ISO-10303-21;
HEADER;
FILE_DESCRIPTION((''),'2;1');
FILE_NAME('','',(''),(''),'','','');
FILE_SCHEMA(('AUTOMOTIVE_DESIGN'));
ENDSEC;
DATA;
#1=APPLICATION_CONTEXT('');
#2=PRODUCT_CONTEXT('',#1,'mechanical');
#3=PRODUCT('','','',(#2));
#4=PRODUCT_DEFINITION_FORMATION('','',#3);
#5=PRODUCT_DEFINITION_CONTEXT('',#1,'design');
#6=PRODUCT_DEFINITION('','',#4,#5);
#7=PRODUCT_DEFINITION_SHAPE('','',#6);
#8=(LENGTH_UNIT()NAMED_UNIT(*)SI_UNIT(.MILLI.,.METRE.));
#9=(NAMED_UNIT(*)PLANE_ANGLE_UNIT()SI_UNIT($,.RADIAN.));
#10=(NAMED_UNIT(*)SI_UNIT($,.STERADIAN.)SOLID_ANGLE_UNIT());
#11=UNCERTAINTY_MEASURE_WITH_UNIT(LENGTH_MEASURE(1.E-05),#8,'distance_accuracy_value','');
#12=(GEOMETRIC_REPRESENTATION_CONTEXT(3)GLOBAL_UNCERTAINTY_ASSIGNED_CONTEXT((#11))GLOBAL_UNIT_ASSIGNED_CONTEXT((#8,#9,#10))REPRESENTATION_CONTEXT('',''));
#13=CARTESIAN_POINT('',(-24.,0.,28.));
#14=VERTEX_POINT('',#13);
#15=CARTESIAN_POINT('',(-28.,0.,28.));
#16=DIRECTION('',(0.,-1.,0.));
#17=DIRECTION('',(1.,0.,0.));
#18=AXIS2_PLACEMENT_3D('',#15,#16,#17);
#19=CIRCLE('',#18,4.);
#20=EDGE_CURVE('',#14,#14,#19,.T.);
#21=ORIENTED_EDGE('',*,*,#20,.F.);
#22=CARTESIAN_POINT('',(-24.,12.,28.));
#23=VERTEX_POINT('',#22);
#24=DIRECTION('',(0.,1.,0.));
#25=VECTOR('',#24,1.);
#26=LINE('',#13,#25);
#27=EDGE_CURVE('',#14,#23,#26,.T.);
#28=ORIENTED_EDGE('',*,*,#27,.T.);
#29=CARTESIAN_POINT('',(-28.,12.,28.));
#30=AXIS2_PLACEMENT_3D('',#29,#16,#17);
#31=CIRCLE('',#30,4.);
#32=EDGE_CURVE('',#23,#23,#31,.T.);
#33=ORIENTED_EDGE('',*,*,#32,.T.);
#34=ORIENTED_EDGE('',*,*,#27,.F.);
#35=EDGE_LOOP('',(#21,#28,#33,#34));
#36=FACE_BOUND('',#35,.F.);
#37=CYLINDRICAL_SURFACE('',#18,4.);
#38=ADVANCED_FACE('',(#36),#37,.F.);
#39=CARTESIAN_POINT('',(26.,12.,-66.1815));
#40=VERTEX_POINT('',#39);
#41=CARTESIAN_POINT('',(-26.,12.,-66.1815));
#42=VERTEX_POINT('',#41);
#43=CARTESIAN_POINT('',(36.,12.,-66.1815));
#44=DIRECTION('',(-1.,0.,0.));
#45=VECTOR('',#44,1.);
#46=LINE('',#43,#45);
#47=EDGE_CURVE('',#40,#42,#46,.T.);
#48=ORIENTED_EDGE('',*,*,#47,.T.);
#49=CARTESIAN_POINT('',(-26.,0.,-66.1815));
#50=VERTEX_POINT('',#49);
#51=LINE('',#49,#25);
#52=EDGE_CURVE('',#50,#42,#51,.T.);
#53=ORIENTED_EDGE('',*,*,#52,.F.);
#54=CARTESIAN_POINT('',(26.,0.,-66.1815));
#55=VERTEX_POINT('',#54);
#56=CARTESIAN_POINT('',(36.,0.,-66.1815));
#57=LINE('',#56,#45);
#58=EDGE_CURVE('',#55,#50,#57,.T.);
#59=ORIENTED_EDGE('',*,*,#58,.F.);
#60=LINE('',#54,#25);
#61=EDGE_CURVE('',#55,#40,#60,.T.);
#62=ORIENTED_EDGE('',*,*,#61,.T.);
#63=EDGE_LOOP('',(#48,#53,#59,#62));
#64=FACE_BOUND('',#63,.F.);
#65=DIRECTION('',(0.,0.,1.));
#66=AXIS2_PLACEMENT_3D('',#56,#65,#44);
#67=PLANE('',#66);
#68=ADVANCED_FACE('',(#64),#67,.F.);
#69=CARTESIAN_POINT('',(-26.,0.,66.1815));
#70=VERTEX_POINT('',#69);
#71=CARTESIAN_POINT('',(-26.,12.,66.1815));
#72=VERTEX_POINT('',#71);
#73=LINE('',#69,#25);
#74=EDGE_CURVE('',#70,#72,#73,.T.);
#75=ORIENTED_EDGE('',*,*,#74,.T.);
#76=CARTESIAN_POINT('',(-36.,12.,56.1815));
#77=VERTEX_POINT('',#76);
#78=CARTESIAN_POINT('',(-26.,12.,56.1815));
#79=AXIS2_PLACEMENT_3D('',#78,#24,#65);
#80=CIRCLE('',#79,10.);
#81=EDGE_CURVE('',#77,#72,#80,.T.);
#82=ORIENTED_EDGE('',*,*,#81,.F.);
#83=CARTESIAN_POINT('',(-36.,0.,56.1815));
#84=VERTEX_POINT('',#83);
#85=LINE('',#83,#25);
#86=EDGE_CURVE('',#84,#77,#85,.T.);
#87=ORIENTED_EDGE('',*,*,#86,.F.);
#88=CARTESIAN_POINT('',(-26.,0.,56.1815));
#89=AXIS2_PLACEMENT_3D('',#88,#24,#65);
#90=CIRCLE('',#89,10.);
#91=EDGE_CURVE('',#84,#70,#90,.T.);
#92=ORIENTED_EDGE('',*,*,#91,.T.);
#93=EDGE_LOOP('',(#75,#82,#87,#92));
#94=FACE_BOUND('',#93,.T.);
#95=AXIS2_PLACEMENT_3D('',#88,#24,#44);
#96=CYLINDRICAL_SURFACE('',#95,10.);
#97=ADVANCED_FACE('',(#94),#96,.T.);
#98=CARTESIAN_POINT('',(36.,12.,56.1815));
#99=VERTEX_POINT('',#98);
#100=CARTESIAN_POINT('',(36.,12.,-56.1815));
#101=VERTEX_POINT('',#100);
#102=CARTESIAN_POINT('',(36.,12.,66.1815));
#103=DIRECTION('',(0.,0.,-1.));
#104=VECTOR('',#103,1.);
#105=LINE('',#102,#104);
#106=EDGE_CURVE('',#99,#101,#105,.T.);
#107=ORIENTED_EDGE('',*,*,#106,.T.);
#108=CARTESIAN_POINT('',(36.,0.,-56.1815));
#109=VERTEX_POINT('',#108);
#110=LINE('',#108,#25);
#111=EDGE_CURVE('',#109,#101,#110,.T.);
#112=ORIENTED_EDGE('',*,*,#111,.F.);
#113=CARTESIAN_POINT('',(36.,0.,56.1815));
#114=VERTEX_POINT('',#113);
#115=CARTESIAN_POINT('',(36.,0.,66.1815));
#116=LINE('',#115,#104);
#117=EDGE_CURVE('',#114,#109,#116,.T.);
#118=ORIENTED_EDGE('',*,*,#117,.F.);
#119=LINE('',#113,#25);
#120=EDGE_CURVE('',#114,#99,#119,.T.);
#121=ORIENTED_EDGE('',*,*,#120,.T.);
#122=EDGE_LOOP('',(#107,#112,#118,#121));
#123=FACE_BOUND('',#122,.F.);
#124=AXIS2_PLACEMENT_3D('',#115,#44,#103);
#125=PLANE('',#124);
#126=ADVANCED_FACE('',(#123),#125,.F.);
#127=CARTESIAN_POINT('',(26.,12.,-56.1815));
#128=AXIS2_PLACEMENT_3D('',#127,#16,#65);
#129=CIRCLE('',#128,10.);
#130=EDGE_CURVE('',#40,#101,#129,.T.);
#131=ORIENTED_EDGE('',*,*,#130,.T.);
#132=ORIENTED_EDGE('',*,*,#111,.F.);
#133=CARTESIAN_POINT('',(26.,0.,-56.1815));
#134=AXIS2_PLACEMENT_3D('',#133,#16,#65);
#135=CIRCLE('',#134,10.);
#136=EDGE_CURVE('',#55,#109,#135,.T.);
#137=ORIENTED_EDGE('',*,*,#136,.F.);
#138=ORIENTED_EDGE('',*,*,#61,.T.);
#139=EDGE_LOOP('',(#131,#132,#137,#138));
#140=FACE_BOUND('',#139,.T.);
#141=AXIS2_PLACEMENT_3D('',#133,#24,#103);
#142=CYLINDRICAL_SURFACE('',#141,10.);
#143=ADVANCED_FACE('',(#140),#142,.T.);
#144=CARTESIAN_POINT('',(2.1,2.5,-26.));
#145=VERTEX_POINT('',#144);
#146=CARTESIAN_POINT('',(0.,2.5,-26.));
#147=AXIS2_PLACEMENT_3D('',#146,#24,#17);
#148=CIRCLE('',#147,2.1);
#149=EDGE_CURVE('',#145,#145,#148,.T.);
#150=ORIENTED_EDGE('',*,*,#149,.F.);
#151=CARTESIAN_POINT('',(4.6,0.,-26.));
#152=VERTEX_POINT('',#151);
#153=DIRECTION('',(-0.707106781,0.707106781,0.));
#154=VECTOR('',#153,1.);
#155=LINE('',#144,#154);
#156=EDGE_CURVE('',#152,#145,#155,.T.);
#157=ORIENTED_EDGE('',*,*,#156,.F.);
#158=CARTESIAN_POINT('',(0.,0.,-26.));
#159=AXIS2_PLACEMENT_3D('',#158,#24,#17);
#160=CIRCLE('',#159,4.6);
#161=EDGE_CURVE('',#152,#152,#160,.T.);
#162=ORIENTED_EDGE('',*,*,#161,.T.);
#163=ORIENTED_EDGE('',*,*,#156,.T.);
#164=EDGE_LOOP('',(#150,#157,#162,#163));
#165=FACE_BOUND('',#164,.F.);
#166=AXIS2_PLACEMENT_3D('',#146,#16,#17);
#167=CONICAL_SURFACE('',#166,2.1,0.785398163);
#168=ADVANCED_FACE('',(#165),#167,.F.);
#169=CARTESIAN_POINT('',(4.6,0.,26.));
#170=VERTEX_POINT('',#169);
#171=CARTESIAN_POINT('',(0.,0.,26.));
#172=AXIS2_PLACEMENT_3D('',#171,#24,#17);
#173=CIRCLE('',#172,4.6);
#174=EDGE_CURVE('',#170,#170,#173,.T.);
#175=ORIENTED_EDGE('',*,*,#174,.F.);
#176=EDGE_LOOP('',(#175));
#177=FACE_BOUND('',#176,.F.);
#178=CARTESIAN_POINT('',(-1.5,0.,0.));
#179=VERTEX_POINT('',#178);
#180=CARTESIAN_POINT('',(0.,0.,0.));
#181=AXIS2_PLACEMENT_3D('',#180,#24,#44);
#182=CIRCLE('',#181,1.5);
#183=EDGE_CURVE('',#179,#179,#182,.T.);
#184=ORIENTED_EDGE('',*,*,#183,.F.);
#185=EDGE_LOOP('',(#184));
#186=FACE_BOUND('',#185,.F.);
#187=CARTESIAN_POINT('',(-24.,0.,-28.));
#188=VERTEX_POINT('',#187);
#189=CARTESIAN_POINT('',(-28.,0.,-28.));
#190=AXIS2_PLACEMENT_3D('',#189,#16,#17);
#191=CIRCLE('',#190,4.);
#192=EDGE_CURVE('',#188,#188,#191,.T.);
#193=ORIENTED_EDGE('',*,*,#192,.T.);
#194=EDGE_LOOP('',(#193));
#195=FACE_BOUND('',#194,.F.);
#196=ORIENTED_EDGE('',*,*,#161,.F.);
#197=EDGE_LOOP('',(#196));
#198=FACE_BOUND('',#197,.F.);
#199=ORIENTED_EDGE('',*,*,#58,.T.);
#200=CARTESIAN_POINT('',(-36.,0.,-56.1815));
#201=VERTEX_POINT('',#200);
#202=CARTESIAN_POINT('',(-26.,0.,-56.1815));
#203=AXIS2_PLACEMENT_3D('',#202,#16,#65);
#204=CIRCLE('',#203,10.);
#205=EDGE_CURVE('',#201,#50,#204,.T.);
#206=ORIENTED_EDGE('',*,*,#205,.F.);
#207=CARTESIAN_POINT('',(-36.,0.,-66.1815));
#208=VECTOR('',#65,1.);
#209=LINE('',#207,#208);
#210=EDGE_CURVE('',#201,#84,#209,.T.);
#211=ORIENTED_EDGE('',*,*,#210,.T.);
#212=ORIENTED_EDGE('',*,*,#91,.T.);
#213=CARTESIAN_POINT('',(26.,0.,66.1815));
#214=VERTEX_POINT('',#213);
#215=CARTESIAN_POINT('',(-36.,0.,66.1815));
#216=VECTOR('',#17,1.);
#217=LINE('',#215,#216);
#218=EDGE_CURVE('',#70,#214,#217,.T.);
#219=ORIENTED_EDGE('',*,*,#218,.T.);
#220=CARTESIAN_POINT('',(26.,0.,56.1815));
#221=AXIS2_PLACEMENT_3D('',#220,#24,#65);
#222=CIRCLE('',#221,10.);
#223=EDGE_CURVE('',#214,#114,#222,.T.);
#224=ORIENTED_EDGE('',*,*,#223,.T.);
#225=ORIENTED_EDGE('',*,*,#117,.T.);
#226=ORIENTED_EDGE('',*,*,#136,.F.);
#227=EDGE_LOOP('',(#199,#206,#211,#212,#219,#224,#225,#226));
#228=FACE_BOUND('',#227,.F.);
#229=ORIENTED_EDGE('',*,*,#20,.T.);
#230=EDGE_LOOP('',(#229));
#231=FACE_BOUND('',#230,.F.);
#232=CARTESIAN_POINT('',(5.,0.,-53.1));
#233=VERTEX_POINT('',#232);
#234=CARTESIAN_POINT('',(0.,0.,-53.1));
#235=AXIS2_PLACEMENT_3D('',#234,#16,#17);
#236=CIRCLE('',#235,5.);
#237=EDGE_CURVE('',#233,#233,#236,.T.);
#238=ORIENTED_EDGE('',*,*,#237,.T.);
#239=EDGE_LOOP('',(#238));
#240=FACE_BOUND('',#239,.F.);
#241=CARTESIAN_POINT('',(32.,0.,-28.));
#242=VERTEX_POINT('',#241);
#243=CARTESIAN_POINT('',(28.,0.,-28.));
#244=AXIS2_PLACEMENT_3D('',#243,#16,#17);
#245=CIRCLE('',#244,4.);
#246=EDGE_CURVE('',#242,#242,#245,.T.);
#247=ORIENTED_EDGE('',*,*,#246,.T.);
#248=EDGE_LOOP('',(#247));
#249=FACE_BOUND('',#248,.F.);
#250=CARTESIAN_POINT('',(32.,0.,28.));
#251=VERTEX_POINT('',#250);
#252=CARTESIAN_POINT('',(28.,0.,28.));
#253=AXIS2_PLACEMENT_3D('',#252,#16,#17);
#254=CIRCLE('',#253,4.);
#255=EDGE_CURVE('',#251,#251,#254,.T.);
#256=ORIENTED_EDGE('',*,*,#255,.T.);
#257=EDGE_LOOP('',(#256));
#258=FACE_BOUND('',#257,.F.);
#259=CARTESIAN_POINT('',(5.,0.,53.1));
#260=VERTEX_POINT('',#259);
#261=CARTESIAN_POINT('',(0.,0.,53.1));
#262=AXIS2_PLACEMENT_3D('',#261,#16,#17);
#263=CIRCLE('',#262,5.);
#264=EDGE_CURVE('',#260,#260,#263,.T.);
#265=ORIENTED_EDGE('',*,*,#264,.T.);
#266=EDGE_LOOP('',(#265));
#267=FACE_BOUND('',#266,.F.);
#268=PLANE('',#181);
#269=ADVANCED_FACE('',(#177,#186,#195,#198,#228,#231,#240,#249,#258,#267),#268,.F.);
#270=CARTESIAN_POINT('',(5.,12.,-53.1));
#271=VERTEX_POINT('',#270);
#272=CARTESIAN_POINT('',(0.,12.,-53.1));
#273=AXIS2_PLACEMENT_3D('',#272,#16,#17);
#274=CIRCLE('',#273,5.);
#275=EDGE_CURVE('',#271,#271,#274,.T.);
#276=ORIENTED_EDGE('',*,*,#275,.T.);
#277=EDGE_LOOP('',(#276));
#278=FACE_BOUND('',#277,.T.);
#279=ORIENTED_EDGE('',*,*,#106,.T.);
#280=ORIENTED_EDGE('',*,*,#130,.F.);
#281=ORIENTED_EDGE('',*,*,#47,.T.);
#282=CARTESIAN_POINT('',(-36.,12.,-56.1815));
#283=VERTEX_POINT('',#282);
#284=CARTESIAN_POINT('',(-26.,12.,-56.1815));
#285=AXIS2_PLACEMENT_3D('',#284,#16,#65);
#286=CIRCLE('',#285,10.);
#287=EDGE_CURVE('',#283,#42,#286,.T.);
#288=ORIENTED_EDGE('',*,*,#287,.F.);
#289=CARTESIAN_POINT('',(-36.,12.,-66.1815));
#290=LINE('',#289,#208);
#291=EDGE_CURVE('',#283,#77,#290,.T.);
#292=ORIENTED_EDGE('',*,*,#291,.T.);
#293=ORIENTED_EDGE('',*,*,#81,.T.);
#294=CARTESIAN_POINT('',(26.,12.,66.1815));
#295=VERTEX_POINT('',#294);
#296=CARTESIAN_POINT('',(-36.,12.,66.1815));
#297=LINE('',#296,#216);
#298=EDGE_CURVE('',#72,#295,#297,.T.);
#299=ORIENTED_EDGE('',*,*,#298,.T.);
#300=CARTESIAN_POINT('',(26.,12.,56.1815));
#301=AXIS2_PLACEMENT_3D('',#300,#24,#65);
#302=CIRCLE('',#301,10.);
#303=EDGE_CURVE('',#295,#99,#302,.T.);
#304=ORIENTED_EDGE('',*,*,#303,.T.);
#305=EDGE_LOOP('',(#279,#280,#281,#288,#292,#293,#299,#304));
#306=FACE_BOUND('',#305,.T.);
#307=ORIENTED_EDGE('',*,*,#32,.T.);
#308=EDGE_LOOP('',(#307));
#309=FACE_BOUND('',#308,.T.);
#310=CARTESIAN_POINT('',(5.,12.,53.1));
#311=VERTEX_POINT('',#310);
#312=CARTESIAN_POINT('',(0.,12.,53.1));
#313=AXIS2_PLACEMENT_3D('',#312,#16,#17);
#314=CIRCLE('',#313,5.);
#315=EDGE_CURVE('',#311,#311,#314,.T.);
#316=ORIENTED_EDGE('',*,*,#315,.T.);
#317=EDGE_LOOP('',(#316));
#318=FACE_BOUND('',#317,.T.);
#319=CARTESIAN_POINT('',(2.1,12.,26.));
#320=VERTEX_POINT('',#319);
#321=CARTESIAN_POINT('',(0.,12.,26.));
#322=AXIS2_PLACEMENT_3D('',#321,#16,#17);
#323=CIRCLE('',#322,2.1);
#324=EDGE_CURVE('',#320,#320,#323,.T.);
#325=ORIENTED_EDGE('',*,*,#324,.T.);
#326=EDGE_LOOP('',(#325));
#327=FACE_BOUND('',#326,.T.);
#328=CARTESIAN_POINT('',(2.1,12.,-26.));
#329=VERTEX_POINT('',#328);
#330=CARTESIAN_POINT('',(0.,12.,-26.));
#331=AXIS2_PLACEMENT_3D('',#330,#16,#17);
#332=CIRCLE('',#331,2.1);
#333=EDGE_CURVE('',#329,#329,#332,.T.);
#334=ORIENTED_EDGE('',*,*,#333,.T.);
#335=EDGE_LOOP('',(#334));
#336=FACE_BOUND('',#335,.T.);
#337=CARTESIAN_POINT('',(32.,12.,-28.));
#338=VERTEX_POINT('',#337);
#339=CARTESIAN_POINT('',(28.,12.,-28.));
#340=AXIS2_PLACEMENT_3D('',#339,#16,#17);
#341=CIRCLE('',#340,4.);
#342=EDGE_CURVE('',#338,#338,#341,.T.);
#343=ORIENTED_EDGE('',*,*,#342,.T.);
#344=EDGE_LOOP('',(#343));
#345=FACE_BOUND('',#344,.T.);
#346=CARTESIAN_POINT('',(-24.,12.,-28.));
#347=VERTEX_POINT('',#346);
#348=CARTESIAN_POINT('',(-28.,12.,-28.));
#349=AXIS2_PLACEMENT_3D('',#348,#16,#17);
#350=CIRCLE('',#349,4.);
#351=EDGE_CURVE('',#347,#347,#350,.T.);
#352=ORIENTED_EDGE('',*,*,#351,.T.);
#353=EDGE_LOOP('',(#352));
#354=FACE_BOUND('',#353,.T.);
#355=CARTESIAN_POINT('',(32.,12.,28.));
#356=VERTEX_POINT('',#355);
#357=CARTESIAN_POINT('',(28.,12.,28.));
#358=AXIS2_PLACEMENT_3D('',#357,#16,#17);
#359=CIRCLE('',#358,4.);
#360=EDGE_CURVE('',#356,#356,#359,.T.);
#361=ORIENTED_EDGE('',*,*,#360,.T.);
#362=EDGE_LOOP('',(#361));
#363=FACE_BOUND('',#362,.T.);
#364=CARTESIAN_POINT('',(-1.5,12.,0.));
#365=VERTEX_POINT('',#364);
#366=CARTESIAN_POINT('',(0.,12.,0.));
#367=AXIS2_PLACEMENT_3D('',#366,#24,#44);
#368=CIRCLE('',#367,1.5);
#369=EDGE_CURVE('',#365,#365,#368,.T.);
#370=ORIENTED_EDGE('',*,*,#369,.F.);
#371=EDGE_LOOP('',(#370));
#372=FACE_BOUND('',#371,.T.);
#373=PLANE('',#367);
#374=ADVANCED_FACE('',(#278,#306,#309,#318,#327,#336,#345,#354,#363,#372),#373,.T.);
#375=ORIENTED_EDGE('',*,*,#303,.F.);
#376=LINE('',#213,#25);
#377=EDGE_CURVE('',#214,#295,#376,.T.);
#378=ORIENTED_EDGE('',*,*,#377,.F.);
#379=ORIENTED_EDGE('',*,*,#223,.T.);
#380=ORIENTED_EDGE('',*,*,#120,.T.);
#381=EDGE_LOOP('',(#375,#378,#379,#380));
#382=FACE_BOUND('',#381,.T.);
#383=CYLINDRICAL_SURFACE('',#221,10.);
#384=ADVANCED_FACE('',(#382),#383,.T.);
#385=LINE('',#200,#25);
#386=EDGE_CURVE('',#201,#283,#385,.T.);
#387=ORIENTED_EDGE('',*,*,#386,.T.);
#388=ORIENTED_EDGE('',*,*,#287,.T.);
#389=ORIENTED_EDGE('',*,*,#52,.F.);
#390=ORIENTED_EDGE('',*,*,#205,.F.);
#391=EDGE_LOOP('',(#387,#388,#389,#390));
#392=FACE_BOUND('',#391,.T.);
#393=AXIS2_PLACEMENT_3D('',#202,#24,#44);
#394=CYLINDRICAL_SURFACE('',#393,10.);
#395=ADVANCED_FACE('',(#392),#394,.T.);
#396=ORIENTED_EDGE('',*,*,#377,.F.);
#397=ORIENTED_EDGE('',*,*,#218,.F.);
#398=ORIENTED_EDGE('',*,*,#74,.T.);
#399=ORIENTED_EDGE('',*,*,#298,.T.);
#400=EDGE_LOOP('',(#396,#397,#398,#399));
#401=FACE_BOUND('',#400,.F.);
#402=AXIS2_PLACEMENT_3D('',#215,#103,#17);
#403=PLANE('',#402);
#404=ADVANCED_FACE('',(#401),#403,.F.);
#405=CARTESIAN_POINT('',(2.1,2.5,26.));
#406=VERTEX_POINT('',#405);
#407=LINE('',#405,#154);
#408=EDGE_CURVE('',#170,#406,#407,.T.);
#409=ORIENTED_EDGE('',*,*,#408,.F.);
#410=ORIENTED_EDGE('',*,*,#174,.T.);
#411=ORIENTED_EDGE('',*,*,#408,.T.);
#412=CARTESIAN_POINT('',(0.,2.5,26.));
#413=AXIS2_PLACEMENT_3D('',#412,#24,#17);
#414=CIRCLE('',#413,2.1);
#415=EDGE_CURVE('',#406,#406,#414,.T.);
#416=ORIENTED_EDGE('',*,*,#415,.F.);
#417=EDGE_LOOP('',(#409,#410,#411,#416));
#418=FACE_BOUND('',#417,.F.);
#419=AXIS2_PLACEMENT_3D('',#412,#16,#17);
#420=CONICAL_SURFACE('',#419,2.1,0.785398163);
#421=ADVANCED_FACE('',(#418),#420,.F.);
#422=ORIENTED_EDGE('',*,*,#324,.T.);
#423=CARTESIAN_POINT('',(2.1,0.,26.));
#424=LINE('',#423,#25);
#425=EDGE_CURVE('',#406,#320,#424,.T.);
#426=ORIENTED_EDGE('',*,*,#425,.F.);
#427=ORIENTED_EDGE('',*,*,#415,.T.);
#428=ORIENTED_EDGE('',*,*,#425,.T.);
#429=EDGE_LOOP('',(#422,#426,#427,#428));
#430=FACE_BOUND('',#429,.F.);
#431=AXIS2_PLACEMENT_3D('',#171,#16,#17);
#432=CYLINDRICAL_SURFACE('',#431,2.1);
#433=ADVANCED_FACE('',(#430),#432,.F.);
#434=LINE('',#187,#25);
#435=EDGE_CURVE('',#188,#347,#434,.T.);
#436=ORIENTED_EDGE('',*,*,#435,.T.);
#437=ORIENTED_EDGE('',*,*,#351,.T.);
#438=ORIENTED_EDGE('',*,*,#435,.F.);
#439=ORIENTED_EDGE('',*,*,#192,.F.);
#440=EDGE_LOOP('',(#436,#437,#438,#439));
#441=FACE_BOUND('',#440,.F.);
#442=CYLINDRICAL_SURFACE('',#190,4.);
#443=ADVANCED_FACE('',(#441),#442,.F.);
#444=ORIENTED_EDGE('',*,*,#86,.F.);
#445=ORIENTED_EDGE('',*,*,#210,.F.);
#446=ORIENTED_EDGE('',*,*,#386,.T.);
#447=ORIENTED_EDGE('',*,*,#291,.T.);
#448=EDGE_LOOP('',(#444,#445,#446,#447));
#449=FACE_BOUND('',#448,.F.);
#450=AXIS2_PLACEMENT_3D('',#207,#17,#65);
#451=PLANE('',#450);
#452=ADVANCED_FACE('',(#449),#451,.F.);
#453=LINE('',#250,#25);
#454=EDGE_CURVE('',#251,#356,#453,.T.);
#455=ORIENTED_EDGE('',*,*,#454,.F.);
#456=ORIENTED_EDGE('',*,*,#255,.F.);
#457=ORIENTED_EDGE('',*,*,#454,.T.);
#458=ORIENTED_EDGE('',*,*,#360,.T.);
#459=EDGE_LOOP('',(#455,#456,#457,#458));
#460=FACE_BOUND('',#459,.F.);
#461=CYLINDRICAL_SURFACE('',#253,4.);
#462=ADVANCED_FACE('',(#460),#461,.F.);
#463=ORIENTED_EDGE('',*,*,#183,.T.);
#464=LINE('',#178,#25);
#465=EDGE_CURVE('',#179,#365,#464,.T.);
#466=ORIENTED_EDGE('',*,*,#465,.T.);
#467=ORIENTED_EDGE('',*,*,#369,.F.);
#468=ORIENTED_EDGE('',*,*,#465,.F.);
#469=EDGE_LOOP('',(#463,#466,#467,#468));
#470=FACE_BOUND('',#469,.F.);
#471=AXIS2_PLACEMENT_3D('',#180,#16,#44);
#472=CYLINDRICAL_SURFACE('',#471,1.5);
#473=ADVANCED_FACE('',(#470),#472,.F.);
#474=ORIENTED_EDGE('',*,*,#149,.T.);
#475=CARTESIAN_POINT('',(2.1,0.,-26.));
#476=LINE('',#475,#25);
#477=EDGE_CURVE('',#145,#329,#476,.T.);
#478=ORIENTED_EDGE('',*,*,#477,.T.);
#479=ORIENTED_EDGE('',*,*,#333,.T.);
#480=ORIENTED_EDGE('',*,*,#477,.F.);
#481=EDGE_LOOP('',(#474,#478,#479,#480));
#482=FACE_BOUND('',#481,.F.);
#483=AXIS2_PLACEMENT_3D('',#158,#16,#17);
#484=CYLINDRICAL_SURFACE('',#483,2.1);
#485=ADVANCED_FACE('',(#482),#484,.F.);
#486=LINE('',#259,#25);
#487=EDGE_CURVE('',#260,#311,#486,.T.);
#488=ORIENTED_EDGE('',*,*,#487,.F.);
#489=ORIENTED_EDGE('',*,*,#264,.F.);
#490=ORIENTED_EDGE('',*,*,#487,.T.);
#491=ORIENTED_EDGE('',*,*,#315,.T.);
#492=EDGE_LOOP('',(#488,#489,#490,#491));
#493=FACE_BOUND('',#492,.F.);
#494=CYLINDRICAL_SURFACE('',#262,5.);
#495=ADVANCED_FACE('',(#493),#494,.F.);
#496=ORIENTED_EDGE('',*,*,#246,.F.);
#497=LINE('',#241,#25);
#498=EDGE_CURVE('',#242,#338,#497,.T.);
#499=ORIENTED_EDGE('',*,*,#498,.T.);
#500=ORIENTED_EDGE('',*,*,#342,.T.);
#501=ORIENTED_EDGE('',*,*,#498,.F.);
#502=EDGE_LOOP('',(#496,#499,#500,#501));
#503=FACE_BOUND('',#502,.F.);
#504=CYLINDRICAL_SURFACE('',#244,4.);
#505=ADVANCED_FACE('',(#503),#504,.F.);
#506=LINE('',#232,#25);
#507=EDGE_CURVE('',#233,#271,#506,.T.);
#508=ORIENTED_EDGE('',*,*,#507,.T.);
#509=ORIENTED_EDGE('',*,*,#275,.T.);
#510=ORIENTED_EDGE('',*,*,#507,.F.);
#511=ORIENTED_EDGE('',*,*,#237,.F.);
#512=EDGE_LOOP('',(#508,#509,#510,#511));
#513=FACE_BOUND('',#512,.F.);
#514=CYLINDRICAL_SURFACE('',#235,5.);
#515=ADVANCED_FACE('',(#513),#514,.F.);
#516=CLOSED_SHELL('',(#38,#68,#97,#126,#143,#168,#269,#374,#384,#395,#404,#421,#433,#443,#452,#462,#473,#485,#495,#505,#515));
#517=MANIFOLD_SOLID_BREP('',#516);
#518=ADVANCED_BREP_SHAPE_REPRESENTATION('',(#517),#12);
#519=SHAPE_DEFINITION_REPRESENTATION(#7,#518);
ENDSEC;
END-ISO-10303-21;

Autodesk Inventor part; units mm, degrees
ref_plane "YZ Plane" through (0, 0, 0) normal (1, 0, 0) x (0, 1, 0)
ref_plane "XZ Plane" through (0, 0, 0) normal (0, 1, 0) x (-1, 0, 0)
ref_plane "XY Plane" through (0, 0, 0) normal (0, 0, 1) x (1, 0, 0)
sketch "Esboço1" plane through (0, 0, 0) normal (0, 1, 0) x (-1, 0, 0)
  circle A0 centre (0, 0) radius 34.95
  circle A1 centre (0, 0) radius 1.5
  line L0 (36, 66.1815) -> (-36, 66.1815)
  line L1 (-36, 66.1815) -> (-36, -66.1815)
  line L2 (-36, -66.1815) -> (36, -66.1815)
  line L3 (36, -66.1815) -> (36, 66.1815)
  line L4 (36, 66.1815) -> (-36, -66.1815) construction
  line L5 (-36, 66.1815) -> (36, -66.1815) construction
  dimension "d0" = 69.9
  dimension "d3" = 3
  dimension "d11" = 132.363
  dimension "d12" = 72
extrude "Extrusão1" add sketch "Esboço1" along normal blind 12 contours A0 | L3 L2 L1 L0
sketch "Esboço2" plane through (0, 0, 0) normal (0, -1, 0) x (1, 0, 0)
  circle A0 centre (0, 0) radius 1.5 projected
  circle A1 centre (0, 0) radius 26
  circle A2 centre (0, -26) radius 2.1
  circle A3 centre (0, 26) radius 2.1
  circle A4 centre (0, 53.1) radius 5
  circle A5 centre (0, -53.1) radius 5
  dimension "d4" = 4.2
  dimension "d5" = 4.2
  dimension "d13" = 10
  dimension "d14" = 53.1
  dimension "d15" = 10
  dimension "d16" = 53.1
  dimension "d20" = 52
extrude "Extrusão2" cut sketch "Esboço2" against normal blind 12 contours A3 A1 | A1 A3 | A2 A1 | A1 A2 | A4 | A5
chamfer "Chanfro1" distance 2.5 angle 45 2 edges at (-2.1, 0, 26) (-2.1, 0, -26)
fillet "Arredondamento1" radius 10 4 edges at (-36, 6, -66.1815) (36, 6, -66.1815) (36, 6, 66.1815) (-36, 6, 66.1815)
sketch "Esboço3" plane through (0, 0, 0) normal (0, -1, 0) x (1, 0, 0)
  circle A0 centre (28, -28) radius 4
  circle A1 centre (0, 0) radius 1.5 projected
  line L0 (0, 0) -> (13.6078, 0)
  line L1 (13.6078, 0) -> (13.6078, -9.8158)
  line L2 (13.6078, -9.8158) -> (0, -9.8158)
  line L3 (0, -9.8158) -> (0, 0)
  circle A2 centre (28, 28) radius 4
  circle A3 centre (-28, -28) radius 4
  circle A4 centre (-28, 28) radius 4
  dimension "d22" = 8
  dimension "d23" = 28
  dimension "d24" = 28
  dimension "d27" = 56
  dimension "d30" = 56
extrude "Extrusão3" cut sketch "Esboço3" against normal blind 12 contours A0 | A2 | A3 | A4
equation "\"d16\" = d14"
properties part number "Inferior_base"
